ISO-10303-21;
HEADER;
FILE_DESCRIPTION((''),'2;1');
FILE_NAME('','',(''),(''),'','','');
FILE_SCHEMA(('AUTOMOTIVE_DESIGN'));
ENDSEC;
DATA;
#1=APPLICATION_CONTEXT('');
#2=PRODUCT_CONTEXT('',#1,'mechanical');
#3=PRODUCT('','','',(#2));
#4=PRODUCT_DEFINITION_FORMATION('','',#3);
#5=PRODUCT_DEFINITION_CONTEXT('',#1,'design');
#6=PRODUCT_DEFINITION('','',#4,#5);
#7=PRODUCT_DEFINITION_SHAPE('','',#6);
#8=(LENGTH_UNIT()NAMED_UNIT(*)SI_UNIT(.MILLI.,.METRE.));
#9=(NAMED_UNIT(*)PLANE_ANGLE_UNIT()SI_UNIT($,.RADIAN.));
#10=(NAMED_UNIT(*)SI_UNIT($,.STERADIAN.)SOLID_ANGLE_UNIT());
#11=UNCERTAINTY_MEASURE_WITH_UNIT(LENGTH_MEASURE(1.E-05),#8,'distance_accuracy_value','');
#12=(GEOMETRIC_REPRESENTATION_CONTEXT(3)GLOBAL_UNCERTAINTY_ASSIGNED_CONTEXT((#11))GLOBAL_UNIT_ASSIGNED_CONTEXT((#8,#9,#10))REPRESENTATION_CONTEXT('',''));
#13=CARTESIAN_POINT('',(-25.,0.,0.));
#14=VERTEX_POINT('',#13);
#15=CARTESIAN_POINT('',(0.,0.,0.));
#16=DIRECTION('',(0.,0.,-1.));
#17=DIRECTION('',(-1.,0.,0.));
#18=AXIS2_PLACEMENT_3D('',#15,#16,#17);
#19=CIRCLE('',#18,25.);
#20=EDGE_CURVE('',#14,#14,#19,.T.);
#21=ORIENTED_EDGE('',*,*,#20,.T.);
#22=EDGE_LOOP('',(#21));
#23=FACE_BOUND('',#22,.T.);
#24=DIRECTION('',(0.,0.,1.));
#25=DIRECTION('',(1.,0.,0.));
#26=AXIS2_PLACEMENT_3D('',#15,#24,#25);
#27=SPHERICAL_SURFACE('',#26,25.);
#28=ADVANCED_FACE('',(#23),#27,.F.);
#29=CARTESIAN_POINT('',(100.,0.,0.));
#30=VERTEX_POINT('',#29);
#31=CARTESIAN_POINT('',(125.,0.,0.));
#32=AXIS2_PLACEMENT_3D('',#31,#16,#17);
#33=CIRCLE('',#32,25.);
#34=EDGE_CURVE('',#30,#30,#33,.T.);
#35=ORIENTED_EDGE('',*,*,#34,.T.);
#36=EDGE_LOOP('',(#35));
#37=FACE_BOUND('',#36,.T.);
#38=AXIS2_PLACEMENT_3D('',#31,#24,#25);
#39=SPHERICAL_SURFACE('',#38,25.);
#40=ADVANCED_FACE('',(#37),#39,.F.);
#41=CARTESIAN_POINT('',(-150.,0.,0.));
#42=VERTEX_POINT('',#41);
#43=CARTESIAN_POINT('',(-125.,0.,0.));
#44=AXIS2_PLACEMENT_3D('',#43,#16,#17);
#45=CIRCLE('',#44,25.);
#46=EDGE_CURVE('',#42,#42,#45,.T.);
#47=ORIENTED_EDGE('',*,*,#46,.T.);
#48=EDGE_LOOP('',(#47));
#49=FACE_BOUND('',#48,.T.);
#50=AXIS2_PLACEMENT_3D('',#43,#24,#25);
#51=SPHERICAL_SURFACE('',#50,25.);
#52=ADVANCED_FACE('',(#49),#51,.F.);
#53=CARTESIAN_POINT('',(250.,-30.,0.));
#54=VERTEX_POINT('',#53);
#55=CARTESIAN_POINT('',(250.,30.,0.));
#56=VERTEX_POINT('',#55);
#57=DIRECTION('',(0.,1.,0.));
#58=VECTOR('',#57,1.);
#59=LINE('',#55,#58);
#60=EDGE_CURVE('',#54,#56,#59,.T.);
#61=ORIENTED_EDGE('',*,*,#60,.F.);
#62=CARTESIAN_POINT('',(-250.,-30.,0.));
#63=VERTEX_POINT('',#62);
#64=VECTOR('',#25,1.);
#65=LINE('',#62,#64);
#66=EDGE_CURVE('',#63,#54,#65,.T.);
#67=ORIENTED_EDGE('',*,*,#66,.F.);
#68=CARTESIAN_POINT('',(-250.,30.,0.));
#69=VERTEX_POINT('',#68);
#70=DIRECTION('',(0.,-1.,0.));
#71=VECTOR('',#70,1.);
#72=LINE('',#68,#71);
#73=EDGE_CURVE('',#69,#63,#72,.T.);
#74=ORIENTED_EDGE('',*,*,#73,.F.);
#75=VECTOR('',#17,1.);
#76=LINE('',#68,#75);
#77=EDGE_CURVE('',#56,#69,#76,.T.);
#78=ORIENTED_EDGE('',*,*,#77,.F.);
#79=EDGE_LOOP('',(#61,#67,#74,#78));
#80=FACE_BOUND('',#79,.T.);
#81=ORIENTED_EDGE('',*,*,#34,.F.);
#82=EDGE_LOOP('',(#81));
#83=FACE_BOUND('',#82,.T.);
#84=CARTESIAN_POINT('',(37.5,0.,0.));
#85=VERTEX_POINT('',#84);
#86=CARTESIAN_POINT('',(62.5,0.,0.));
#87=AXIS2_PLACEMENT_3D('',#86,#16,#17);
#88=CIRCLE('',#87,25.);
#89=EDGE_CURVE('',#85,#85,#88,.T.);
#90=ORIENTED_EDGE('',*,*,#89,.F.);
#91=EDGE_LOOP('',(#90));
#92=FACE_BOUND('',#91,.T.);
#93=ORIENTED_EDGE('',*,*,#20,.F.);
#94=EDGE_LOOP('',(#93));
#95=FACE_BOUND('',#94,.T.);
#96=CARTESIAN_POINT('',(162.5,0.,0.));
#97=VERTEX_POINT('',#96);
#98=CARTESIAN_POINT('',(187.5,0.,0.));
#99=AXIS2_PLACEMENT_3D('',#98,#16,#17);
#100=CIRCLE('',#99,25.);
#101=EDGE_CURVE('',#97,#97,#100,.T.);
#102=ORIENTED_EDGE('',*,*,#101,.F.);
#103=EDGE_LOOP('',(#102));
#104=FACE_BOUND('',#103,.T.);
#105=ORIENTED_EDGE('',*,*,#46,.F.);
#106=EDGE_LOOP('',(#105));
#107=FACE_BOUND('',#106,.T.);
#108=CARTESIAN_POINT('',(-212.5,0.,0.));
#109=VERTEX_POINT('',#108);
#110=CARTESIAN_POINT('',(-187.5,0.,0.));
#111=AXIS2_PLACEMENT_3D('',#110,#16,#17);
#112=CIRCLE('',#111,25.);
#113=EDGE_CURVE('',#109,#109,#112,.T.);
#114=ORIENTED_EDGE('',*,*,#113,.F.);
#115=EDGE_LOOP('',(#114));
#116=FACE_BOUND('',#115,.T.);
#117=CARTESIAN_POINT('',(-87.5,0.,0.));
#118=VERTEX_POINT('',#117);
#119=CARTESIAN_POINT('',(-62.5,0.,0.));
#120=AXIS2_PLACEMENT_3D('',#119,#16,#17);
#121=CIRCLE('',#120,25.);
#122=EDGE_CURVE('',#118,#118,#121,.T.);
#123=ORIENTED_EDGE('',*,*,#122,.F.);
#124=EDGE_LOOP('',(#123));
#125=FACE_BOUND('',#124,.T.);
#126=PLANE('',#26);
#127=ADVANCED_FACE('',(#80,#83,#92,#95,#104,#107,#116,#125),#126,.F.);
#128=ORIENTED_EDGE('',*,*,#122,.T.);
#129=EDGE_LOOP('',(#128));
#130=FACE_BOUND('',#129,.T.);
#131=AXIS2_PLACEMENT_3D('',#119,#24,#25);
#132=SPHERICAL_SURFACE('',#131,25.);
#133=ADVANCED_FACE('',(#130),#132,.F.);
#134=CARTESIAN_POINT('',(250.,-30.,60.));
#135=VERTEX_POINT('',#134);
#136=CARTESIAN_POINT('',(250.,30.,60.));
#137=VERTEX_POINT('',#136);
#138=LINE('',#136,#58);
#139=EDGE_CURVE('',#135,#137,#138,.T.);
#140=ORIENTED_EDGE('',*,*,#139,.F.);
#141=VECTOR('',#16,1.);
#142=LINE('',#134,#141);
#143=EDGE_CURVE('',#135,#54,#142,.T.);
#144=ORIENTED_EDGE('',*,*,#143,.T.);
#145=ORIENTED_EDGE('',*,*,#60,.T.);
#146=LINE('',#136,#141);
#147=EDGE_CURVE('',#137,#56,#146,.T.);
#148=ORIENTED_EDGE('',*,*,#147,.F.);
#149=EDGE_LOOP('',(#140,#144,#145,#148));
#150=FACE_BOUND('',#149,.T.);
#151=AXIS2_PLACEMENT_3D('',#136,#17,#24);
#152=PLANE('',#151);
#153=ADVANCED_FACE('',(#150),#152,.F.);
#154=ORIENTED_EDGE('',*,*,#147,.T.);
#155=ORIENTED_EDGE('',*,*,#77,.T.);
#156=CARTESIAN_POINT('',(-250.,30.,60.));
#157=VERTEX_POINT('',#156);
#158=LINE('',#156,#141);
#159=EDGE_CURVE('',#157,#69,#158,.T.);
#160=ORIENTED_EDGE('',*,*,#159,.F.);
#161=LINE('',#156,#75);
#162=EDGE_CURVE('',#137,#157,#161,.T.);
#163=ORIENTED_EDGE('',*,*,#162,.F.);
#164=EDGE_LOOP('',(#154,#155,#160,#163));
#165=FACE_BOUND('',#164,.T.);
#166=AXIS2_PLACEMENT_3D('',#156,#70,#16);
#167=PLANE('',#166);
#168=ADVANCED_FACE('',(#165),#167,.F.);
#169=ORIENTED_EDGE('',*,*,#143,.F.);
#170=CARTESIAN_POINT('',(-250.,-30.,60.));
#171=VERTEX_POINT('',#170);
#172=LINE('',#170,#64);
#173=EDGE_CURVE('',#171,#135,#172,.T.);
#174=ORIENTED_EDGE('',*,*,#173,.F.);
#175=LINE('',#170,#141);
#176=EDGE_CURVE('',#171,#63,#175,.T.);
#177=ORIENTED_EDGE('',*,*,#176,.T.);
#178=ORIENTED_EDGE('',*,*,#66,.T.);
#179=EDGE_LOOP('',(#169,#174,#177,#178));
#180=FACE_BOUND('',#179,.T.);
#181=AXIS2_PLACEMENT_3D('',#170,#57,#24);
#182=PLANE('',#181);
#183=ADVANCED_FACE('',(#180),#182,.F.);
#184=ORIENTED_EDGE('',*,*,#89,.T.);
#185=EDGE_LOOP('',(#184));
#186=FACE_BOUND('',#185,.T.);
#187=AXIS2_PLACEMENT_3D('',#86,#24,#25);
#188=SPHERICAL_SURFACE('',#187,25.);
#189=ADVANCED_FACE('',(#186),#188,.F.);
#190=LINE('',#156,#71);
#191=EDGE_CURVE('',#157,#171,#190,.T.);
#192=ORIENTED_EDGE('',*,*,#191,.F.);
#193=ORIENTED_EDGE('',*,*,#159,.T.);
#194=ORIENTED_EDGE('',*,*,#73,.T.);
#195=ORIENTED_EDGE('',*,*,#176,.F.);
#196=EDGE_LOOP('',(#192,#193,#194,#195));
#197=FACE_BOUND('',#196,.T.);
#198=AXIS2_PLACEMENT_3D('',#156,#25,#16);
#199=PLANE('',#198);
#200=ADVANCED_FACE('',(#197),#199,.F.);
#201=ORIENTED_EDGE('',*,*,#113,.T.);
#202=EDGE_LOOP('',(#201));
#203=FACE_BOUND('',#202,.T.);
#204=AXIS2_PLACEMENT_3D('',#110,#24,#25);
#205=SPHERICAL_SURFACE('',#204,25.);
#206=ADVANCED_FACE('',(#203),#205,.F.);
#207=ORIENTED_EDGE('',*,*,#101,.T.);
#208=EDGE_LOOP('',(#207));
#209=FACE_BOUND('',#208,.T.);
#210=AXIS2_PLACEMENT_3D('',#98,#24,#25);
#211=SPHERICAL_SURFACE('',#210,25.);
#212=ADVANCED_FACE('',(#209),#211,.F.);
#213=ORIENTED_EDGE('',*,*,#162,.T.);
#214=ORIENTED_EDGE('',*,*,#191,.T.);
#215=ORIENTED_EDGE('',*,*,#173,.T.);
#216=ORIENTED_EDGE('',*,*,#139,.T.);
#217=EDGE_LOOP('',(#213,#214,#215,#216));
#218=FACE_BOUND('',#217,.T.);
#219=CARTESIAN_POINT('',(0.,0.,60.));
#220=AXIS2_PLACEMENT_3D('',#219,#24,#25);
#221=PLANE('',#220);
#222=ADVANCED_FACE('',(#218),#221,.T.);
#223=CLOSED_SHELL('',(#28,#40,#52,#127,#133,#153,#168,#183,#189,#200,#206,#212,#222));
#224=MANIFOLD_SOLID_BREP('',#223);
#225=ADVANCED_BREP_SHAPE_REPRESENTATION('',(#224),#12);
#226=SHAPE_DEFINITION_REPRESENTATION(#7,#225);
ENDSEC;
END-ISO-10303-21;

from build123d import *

# Parameters (mm, degrees)
SZKIC1_W                    = 500
SZKIC1_H                    = 60
DODANIE_WYCI_GNI_CIE1_DEPTH = 60
SZKIC2_R                    = 25
WYTNIJ_WYCI_GNI_CIE1_DEPTH  = 25
ZAOKR_GLENIE2_R             = 25


with BuildPart() as part:
    # Szkic1 → Dodanie-wyciągnięcie1 (new body)
    with BuildSketch(Plane.XY):
        Rectangle(SZKIC1_W, SZKIC1_H)
    extrude(amount=DODANIE_WYCI_GNI_CIE1_DEPTH)

    # Szkic2 → Wytnij-wyciągnięcie1 (cut)
    with BuildSketch(Plane(origin=(0, 0, 0), x_dir=(-1, 0, 0), z_dir=(0, 0, -1))):
        with Locations((-187.5, 0)):
            Circle(SZKIC2_R)
        with Locations((-125, 0)):
            Circle(SZKIC2_R)
        with Locations((-62.5, 0)):
            Circle(SZKIC2_R)
        Circle(SZKIC2_R)
        with Locations((62.5, 0)):
            Circle(SZKIC2_R)
        with Locations((125, 0)):
            Circle(SZKIC2_R)
        with Locations((187.5, 0)):
            Circle(SZKIC2_R)
    extrude(amount=-WYTNIJ_WYCI_GNI_CIE1_DEPTH, mode=Mode.SUBTRACT)

    # Zaokrąglenie2
    zaokr_glenie2_edges = [part.edges().sort_by_distance(p)[0] for p in [
        (212.5, 0, 25),
        (150, 0, 25),
        (87.5, 0, 25),
        (25, 0, 25),
        (-37.5, 0, 25),
        (-100, 0, 25),
        (-162.5, 0, 25),
    ]]
    fillet(zaokr_glenie2_edges, radius=ZAOKR_GLENIE2_R - 0.0001)  # a hair under: the kernel refuses the full size


solid = part.part
